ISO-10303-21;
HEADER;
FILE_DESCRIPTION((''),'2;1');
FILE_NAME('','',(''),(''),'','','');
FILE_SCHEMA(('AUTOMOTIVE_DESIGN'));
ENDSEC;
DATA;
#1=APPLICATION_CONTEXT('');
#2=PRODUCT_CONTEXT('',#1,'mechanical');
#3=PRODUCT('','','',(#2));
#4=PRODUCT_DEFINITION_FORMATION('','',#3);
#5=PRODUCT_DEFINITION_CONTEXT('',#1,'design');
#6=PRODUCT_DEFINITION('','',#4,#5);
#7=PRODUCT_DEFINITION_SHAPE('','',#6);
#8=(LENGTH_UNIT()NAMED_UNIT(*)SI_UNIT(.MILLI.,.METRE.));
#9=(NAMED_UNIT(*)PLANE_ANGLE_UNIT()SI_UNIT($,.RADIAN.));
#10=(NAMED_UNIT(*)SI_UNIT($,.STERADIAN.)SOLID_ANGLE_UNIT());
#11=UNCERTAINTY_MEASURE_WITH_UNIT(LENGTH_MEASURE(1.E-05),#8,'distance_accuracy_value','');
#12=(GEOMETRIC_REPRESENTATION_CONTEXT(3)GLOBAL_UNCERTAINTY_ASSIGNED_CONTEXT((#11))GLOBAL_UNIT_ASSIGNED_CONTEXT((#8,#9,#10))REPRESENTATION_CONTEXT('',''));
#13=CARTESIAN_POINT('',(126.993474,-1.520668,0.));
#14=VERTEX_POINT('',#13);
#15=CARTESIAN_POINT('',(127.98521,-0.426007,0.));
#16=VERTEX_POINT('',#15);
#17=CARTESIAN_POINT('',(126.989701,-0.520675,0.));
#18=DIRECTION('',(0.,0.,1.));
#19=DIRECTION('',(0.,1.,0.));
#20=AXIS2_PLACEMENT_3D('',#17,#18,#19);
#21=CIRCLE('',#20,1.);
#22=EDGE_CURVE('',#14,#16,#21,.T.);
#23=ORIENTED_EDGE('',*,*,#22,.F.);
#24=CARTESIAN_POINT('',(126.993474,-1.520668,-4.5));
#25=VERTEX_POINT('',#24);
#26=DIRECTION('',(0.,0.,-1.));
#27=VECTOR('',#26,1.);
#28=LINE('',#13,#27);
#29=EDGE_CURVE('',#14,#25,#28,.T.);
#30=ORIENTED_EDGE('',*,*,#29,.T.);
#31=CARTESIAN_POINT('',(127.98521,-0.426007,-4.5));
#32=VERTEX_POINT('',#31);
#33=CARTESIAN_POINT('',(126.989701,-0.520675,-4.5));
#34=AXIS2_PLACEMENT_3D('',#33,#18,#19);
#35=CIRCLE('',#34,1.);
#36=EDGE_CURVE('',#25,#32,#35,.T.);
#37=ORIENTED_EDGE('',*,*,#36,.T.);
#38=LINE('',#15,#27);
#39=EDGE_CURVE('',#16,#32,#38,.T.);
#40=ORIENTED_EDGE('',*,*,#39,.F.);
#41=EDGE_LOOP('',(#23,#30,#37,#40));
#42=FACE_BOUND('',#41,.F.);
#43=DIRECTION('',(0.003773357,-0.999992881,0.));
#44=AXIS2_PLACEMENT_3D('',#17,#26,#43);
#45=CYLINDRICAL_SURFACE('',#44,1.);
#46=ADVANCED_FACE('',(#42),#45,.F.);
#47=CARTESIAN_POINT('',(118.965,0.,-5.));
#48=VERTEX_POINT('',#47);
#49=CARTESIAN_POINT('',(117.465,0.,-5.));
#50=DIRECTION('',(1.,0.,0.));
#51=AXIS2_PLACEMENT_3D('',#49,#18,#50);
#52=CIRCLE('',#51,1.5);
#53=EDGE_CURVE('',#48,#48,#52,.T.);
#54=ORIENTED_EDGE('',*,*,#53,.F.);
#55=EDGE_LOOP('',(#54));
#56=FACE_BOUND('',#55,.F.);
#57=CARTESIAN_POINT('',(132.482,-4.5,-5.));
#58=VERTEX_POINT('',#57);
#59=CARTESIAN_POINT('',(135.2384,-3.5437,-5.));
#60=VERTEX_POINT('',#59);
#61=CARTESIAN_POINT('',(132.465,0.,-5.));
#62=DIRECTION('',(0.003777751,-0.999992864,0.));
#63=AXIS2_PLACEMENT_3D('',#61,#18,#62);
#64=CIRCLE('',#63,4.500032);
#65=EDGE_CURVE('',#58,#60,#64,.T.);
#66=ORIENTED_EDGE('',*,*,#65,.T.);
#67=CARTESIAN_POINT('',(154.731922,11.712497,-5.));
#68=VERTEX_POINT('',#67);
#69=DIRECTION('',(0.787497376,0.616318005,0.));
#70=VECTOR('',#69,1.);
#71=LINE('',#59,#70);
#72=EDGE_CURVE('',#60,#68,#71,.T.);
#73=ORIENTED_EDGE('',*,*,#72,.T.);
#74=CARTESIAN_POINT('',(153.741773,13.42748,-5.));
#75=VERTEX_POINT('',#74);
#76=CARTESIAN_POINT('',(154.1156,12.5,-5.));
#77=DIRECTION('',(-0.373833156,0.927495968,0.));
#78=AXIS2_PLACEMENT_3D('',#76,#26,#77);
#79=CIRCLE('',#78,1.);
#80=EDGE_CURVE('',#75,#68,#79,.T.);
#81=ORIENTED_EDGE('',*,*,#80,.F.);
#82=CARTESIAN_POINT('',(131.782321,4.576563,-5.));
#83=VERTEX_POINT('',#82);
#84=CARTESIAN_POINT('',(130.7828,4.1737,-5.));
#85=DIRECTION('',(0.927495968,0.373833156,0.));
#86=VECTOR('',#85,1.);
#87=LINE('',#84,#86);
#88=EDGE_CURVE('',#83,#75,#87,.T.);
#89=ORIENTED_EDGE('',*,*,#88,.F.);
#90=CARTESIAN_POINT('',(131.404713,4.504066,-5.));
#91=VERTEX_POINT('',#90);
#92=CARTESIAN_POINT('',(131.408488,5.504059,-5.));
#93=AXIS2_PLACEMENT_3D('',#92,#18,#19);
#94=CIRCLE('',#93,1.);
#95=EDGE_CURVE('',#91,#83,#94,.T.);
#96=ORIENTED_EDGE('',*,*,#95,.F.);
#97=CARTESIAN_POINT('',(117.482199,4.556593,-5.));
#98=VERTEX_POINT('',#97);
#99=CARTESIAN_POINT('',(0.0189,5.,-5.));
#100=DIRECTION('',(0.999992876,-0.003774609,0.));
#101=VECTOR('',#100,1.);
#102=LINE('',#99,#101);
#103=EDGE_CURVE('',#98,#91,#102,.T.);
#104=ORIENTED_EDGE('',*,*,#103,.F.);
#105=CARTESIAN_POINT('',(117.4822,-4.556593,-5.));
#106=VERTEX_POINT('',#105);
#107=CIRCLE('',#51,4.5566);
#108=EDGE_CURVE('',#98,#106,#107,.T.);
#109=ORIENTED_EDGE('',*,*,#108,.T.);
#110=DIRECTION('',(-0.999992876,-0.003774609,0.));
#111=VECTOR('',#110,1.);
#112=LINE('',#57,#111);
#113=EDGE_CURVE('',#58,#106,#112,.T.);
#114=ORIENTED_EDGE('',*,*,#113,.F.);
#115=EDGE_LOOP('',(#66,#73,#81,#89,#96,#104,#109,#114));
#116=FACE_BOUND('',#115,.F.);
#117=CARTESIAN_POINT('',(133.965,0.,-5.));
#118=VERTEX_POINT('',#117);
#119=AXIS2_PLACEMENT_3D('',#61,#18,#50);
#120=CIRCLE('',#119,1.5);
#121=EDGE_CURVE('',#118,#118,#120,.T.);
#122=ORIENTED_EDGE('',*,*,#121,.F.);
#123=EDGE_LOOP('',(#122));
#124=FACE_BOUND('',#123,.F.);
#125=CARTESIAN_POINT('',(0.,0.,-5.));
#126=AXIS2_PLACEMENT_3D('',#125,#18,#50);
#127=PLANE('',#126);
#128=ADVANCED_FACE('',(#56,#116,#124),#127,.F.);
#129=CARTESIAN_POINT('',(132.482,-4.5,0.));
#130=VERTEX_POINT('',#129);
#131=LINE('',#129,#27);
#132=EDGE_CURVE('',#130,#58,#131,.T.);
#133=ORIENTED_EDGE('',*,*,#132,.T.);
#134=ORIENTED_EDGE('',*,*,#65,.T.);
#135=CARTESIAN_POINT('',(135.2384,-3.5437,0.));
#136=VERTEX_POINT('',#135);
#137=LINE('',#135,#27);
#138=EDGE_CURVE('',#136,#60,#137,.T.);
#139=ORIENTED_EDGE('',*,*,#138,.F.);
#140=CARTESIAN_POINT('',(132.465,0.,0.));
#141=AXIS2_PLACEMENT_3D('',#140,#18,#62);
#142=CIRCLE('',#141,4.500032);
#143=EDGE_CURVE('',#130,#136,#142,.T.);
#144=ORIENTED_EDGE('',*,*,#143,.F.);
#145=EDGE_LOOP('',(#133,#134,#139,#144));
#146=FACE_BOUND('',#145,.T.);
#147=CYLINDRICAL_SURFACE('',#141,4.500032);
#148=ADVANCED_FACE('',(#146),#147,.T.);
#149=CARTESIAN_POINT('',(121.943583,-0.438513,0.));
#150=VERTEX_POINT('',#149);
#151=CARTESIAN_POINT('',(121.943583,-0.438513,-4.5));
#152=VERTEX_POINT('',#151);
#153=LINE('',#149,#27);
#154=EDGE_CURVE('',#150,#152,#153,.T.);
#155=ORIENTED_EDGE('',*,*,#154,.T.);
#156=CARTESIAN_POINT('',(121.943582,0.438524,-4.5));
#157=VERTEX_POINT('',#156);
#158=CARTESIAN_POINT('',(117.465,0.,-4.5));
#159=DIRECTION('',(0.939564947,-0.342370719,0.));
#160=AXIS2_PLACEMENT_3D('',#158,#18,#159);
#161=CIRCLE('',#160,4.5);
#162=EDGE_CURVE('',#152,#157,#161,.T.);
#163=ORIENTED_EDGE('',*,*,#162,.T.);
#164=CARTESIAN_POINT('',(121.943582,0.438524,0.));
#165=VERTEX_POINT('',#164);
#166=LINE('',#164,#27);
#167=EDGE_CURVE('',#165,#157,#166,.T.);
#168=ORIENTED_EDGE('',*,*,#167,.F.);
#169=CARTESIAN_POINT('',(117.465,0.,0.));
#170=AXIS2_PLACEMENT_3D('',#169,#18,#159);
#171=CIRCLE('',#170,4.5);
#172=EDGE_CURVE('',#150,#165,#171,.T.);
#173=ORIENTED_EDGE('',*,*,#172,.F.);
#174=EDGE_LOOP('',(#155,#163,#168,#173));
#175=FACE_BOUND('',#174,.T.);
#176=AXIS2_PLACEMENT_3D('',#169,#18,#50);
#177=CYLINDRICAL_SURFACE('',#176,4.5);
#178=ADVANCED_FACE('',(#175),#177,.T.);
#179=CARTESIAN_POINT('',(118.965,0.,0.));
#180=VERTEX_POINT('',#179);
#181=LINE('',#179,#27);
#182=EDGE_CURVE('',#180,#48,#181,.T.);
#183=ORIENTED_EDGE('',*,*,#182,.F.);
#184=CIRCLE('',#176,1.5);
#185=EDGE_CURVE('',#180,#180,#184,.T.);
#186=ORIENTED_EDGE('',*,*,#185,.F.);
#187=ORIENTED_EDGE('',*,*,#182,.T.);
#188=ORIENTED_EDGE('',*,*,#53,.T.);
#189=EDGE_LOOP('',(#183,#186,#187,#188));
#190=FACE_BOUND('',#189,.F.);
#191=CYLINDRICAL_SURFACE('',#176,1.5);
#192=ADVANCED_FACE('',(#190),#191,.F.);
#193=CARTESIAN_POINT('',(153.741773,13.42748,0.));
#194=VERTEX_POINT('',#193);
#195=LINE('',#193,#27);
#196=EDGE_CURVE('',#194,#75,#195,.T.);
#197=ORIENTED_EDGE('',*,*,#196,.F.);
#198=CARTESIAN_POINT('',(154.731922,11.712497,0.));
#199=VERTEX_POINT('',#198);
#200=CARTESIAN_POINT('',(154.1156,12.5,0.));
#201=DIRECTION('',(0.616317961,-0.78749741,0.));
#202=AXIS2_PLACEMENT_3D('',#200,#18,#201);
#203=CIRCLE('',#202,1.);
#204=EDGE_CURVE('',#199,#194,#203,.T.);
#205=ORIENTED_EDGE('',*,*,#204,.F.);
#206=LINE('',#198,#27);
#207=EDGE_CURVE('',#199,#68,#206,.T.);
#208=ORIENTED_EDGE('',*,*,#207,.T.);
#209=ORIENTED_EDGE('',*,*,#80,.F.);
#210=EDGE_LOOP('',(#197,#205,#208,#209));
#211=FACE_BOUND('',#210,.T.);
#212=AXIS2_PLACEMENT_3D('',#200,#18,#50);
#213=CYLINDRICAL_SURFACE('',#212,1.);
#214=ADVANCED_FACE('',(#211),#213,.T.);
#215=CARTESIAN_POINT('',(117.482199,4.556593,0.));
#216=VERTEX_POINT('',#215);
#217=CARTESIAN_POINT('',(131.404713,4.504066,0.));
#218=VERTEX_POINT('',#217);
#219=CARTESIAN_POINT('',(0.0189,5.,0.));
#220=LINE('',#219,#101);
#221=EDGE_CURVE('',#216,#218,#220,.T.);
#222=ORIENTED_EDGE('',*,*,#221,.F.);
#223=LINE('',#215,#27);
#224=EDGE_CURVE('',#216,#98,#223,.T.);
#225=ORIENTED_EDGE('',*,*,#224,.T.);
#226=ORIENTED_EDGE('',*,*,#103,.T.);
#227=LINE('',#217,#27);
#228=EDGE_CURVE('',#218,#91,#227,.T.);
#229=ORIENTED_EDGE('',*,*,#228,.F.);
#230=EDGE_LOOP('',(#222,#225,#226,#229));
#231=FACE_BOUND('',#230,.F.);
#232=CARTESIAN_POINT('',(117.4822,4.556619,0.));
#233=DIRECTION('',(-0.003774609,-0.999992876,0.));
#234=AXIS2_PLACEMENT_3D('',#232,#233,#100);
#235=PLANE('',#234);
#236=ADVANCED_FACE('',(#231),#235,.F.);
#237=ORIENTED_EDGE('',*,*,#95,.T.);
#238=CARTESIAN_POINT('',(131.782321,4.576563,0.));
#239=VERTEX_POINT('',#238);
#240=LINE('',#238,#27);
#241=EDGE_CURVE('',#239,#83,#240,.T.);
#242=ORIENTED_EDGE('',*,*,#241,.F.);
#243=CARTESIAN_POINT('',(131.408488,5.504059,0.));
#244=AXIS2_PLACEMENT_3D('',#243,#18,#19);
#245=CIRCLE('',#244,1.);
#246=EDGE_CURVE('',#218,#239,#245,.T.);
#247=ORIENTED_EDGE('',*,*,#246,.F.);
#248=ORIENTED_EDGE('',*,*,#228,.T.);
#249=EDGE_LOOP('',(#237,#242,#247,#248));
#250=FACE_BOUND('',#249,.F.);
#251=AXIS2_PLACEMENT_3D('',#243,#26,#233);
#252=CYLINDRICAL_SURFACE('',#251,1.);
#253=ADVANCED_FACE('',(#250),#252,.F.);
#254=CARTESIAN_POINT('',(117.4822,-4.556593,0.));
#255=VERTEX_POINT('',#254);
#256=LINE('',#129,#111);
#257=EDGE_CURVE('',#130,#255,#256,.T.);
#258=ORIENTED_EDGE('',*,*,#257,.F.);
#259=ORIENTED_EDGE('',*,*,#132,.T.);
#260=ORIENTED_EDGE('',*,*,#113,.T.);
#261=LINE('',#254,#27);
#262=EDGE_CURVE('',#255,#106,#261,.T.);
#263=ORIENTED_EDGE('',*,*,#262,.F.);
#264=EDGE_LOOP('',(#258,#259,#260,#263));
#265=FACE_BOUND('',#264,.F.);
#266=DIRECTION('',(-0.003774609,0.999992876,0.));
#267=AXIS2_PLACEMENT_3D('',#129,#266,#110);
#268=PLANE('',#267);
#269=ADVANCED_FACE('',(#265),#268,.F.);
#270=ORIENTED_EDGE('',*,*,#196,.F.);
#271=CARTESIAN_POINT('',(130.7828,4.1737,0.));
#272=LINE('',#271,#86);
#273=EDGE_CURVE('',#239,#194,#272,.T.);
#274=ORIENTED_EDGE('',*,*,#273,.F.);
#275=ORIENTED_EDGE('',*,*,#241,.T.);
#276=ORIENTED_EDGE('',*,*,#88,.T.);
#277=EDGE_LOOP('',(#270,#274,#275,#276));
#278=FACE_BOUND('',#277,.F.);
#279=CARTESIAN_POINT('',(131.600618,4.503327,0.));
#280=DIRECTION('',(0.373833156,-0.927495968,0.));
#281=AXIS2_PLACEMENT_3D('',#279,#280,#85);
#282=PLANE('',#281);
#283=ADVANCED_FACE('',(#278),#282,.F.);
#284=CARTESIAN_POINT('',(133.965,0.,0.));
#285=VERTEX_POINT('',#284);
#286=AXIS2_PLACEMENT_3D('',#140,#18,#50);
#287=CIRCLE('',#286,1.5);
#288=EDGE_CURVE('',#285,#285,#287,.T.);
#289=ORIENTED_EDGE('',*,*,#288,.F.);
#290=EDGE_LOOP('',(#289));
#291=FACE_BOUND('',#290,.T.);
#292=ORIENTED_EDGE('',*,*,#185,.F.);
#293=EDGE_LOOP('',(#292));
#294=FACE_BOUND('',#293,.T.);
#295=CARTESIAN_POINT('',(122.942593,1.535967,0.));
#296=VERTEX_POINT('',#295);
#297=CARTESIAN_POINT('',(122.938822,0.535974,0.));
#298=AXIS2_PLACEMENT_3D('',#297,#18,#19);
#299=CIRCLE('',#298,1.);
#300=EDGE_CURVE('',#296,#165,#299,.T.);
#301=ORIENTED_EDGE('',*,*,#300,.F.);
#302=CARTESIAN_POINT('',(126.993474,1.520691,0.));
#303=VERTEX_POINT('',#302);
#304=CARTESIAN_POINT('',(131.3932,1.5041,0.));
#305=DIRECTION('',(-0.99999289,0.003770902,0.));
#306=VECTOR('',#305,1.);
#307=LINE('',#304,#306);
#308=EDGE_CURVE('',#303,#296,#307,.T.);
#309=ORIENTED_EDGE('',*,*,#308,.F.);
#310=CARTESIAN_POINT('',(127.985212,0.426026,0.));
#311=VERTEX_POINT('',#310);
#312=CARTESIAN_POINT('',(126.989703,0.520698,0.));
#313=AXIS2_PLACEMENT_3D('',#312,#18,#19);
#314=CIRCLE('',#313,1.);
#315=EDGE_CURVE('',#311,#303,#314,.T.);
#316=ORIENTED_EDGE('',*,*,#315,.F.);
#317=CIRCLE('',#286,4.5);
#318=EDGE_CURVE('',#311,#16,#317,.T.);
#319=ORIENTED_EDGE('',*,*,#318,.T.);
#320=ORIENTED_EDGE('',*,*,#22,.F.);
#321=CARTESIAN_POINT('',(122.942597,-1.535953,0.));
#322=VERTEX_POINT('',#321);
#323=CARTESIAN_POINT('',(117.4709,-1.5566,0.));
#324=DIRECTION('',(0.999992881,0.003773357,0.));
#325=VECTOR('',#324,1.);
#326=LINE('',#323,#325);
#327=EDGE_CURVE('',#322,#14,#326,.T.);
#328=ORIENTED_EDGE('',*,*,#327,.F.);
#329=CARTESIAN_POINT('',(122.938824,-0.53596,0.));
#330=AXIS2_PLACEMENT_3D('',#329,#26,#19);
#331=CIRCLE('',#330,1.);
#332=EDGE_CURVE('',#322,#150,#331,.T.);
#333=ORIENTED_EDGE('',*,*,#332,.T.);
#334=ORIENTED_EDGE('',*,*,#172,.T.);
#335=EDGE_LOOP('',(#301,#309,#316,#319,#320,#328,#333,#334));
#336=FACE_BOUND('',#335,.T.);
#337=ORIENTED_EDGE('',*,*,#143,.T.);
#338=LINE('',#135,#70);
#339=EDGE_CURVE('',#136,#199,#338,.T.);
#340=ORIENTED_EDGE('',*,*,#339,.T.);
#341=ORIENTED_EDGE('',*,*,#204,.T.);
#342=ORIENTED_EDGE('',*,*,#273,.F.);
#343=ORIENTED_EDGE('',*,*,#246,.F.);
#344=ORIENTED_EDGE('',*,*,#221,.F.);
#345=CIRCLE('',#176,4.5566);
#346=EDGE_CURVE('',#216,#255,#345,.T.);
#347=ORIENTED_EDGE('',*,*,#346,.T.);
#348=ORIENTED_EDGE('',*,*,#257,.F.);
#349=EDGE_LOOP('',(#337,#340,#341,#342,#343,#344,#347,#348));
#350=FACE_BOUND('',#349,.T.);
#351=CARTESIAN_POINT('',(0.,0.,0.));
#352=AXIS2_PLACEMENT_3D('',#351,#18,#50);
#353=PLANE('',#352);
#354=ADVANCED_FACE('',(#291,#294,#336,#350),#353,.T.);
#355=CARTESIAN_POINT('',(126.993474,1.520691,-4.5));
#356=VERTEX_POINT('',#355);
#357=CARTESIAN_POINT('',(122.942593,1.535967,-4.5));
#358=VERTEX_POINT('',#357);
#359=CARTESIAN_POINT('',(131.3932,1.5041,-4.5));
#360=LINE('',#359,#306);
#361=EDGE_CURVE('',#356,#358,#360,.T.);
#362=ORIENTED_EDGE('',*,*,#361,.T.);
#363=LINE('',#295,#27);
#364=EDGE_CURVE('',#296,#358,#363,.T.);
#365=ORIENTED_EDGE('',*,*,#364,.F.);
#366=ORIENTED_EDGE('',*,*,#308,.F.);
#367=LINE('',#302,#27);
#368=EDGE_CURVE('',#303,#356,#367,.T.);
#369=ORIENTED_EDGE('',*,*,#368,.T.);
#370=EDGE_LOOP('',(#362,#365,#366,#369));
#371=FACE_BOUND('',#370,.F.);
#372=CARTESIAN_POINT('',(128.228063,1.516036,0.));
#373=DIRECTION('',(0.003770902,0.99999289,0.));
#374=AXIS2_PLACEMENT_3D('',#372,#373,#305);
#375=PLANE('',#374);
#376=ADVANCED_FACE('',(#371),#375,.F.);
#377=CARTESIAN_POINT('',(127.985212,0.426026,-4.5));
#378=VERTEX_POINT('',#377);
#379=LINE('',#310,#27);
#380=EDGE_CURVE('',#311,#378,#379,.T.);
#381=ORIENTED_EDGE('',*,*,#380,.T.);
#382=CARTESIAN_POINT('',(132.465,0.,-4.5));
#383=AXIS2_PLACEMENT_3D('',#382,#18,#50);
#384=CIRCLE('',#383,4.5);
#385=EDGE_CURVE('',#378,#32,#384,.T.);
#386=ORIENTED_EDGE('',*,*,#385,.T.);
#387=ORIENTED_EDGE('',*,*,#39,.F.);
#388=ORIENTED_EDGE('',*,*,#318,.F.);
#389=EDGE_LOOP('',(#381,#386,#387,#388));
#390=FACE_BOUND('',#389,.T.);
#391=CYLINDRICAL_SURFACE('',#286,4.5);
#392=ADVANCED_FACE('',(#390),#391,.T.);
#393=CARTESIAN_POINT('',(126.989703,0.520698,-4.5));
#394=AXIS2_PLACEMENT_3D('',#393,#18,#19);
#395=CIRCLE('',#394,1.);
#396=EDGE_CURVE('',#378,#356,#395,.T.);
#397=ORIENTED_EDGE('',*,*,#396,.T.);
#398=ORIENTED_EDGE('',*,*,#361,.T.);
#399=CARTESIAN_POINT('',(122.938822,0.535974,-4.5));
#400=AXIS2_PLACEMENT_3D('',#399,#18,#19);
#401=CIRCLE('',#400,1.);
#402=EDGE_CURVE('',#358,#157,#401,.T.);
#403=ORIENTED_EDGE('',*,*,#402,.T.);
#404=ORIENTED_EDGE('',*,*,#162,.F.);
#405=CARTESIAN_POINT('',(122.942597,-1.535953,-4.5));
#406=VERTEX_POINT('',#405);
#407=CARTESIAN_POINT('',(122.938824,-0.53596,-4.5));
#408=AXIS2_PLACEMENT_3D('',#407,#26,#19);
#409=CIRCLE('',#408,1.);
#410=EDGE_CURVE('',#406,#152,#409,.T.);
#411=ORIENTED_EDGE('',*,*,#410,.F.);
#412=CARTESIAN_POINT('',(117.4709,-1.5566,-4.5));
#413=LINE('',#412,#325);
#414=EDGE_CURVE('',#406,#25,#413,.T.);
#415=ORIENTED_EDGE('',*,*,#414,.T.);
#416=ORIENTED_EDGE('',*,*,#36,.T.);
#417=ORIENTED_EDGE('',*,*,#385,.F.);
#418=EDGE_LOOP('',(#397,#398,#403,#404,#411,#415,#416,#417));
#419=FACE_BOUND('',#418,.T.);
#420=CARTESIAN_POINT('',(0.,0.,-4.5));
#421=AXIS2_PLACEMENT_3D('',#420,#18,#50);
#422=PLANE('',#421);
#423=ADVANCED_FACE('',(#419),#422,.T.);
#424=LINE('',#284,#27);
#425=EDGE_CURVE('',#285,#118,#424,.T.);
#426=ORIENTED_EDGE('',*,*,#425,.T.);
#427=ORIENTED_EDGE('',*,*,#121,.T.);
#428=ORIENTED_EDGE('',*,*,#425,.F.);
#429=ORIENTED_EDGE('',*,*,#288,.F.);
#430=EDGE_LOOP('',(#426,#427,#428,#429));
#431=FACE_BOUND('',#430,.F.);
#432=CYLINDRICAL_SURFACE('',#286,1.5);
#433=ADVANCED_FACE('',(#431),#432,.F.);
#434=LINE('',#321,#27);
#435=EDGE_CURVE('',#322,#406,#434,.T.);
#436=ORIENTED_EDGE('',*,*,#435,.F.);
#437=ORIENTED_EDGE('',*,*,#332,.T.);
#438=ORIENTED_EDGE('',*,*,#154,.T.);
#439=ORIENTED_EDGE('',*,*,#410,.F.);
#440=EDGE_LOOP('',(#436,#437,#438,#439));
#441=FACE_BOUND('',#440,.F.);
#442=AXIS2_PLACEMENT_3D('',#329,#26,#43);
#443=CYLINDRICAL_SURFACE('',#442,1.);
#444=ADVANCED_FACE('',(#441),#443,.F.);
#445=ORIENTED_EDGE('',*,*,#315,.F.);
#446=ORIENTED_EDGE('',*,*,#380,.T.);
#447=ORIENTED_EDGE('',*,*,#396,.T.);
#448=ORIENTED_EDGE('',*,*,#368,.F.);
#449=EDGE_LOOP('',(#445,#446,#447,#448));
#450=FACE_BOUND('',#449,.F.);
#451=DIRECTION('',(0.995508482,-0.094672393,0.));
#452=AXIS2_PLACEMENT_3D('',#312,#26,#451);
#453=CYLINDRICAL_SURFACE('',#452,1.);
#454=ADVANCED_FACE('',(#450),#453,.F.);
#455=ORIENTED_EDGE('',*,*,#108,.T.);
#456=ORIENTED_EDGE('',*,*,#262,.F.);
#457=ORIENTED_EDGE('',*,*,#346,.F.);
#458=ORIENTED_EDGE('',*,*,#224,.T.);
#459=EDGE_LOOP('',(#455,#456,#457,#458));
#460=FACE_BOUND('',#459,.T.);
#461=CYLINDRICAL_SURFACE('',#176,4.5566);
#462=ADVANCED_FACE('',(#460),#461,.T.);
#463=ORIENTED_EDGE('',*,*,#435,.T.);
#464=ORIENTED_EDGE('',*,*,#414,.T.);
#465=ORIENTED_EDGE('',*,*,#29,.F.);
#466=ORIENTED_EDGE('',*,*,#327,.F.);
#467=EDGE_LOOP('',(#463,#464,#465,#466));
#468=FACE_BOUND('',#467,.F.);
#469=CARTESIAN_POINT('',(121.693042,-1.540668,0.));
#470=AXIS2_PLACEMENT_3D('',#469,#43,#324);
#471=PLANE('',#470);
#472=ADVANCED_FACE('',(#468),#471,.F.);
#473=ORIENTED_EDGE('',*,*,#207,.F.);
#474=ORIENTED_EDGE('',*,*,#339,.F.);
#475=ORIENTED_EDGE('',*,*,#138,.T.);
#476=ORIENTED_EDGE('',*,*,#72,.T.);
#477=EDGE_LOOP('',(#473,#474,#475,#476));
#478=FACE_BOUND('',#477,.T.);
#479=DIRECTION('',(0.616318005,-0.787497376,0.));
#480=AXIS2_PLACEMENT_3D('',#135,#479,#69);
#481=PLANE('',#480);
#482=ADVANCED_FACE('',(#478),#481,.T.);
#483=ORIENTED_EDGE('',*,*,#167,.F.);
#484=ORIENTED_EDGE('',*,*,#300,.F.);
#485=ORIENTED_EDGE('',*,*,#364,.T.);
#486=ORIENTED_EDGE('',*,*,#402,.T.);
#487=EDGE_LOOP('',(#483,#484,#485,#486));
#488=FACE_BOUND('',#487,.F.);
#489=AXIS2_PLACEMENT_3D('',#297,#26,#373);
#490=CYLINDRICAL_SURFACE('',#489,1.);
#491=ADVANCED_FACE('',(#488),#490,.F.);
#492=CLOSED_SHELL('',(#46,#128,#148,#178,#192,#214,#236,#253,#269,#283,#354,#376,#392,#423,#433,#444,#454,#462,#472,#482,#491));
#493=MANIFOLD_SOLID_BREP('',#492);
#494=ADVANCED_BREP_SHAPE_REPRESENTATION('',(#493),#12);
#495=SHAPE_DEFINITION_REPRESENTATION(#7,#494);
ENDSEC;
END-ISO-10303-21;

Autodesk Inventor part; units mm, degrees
ref_plane "YZ Plane" through (0, 0, 0) normal (1, 0, 0) x (0, 1, 0)
ref_plane "XZ Plane" through (0, 0, 0) normal (0, 1, 0) x (-1, 0, 0)
ref_plane "XY Plane" through (0, 0, 0) normal (0, 0, 1) x (1, 0, 0)
sketch "スケッチ1" plane through (0, 0, 0) normal (0, 0, 1) x (1, 0, 0)
  circle A0 centre (132.465, 0) radius 1.5
  circle A1 centre (45, 0) radius 1.5
  circle A2 centre (102.465, 0) radius 1.5
  circle A3 centre (72.465, 0) radius 1.5
  circle A4 centre (15, 0) radius 1.5
  circle A5 centre (30, 0) radius 1.5
  circle A6 centre (87.465, 0) radius 1.5
  circle A7 centre (117.465, 0) radius 1.5
  circle A8 centre (60, 0) radius 1.5
  circle A9 centre (0, 0) radius 1.5
  line L0 (132.482, -4.5) -> (0.0189, -5)
  arc A10 (0.0189, 5) -> (0.0189, -5) centre (0, 0) ccw
  line L1 (0.0189, 5) -> (132.482, 4.5)
  arc A11 (132.482, -4.5) -> (132.482, 4.5) centre (132.465, 0) ccw
  circle A12 centre (117.465, 0) radius 4.5566
  line L2 (135.2384, -3.5437) -> (160.3015, 16.0714)
  circle A13 centre (132.465, 0) radius 4.5
  line L3 (130.7828, 4.1737) -> (160.3015, 16.0714)
  circle A14 centre (154.1156, 12.5) radius 1
  point P0 (117.4822, -4.5566)
  point P1 (154.732, 11.7125)
  point P2 (153.7418, 13.4275)
  point P3 (131.6004, 4.5033)
  point P4 (117.4822, 4.5566)
  dimension "d0" = 2
  dimension "d1" = 25
  dimension "d2" = 150
extrude "押し出し1" add sketch "スケッチ1" against normal blind 5 contours A13 A11 | L0 A12 L1 L3 A13 | A12 | A11 L1 L3 A14 L2 | L3 L1 A13 | A14
fillet "フィレット1" radius 1 1 edges at (131.6004, 4.5033, -2.5)
sketch "スケッチ2" plane through (0, 0, 0) normal (0, 0, 1) x (1, 0, 0)
  circle A0 centre (117.465, 0) radius 1.5 projected
  circle A1 centre (132.465, 0) radius 1.5 projected
  line L0 (132.482, -4.5) -> (117.4822, -4.5566) projected
  arc A2 (117.4822, 4.5566) -> (117.4822, -4.5566) centre (117.465, 0) ccw projected
  line L1 (117.4822, 4.5566) -> (131.4045, 4.504) projected
  arc A3 (131.4045, 4.504) -> (131.7821, 4.5765) centre (131.4083, 5.504) ccw projected
  line L2 (131.7821, 4.5765) -> (153.7418, 13.4275) projected
  arc A4 (154.732, 11.7125) -> (153.7418, 13.4275) centre (154.1156, 12.5) ccw projected
  line L3 (154.732, 11.7125) -> (135.2384, -3.5437) projected
  arc A5 (132.482, -4.5) -> (135.2384, -3.5437) centre (132.465, 0) ccw projected
  line L4 (131.3932, 1.5041) -> (117.4709, 1.5566)
  arc A6 (117.4709, 1.5566) -> (117.4709, -1.5566) centre (117.465, 0) ccw
  line L5 (117.4709, -1.5566) -> (132.4707, -1.5)
  arc A7 (132.4707, -1.5) -> (133.3895, -1.1812) centre (132.465, 0) ccw
  line L6 (133.3895, -1.1812) -> (141.7438, 5.3571)
  line L7 (141.7438, 5.3571) -> (132.9036, 1.794)
  arc A8 (131.3932, 1.5041) -> (132.9036, 1.794) centre (131.4083, 5.504) ccw
  circle A9 centre (117.465, 0) radius 4.5
  circle A10 centre (132.465, 0) radius 4.5
  circle A11 centre (136.965, 2.8567) radius 1
  point P0 (0, 0)
  point P1 (128.2281, -1.516)
  point P2 (128.2281, 1.516)
  point P3 (121.693, 1.5407)
  point P4 (121.693, -1.5407)
  dimension "d6" = 3
  dimension "d7" = 3
  dimension "d8" = 3
  dimension "d9" = 2
extrude "押し出し2" cut sketch "スケッチ2" against normal blind 4.5 contours L5 A9 L4 A10
fillet "フィレット2" radius 1 4 edges at (121.693, 1.5407, -2.25) (121.693, -1.5407, -2.25) (128.2281, 1.516, -2.25) (128.2281, -1.516, -2.25)
properties part number "カウンター 先端部" material "ポリカーボネート、クリア"
